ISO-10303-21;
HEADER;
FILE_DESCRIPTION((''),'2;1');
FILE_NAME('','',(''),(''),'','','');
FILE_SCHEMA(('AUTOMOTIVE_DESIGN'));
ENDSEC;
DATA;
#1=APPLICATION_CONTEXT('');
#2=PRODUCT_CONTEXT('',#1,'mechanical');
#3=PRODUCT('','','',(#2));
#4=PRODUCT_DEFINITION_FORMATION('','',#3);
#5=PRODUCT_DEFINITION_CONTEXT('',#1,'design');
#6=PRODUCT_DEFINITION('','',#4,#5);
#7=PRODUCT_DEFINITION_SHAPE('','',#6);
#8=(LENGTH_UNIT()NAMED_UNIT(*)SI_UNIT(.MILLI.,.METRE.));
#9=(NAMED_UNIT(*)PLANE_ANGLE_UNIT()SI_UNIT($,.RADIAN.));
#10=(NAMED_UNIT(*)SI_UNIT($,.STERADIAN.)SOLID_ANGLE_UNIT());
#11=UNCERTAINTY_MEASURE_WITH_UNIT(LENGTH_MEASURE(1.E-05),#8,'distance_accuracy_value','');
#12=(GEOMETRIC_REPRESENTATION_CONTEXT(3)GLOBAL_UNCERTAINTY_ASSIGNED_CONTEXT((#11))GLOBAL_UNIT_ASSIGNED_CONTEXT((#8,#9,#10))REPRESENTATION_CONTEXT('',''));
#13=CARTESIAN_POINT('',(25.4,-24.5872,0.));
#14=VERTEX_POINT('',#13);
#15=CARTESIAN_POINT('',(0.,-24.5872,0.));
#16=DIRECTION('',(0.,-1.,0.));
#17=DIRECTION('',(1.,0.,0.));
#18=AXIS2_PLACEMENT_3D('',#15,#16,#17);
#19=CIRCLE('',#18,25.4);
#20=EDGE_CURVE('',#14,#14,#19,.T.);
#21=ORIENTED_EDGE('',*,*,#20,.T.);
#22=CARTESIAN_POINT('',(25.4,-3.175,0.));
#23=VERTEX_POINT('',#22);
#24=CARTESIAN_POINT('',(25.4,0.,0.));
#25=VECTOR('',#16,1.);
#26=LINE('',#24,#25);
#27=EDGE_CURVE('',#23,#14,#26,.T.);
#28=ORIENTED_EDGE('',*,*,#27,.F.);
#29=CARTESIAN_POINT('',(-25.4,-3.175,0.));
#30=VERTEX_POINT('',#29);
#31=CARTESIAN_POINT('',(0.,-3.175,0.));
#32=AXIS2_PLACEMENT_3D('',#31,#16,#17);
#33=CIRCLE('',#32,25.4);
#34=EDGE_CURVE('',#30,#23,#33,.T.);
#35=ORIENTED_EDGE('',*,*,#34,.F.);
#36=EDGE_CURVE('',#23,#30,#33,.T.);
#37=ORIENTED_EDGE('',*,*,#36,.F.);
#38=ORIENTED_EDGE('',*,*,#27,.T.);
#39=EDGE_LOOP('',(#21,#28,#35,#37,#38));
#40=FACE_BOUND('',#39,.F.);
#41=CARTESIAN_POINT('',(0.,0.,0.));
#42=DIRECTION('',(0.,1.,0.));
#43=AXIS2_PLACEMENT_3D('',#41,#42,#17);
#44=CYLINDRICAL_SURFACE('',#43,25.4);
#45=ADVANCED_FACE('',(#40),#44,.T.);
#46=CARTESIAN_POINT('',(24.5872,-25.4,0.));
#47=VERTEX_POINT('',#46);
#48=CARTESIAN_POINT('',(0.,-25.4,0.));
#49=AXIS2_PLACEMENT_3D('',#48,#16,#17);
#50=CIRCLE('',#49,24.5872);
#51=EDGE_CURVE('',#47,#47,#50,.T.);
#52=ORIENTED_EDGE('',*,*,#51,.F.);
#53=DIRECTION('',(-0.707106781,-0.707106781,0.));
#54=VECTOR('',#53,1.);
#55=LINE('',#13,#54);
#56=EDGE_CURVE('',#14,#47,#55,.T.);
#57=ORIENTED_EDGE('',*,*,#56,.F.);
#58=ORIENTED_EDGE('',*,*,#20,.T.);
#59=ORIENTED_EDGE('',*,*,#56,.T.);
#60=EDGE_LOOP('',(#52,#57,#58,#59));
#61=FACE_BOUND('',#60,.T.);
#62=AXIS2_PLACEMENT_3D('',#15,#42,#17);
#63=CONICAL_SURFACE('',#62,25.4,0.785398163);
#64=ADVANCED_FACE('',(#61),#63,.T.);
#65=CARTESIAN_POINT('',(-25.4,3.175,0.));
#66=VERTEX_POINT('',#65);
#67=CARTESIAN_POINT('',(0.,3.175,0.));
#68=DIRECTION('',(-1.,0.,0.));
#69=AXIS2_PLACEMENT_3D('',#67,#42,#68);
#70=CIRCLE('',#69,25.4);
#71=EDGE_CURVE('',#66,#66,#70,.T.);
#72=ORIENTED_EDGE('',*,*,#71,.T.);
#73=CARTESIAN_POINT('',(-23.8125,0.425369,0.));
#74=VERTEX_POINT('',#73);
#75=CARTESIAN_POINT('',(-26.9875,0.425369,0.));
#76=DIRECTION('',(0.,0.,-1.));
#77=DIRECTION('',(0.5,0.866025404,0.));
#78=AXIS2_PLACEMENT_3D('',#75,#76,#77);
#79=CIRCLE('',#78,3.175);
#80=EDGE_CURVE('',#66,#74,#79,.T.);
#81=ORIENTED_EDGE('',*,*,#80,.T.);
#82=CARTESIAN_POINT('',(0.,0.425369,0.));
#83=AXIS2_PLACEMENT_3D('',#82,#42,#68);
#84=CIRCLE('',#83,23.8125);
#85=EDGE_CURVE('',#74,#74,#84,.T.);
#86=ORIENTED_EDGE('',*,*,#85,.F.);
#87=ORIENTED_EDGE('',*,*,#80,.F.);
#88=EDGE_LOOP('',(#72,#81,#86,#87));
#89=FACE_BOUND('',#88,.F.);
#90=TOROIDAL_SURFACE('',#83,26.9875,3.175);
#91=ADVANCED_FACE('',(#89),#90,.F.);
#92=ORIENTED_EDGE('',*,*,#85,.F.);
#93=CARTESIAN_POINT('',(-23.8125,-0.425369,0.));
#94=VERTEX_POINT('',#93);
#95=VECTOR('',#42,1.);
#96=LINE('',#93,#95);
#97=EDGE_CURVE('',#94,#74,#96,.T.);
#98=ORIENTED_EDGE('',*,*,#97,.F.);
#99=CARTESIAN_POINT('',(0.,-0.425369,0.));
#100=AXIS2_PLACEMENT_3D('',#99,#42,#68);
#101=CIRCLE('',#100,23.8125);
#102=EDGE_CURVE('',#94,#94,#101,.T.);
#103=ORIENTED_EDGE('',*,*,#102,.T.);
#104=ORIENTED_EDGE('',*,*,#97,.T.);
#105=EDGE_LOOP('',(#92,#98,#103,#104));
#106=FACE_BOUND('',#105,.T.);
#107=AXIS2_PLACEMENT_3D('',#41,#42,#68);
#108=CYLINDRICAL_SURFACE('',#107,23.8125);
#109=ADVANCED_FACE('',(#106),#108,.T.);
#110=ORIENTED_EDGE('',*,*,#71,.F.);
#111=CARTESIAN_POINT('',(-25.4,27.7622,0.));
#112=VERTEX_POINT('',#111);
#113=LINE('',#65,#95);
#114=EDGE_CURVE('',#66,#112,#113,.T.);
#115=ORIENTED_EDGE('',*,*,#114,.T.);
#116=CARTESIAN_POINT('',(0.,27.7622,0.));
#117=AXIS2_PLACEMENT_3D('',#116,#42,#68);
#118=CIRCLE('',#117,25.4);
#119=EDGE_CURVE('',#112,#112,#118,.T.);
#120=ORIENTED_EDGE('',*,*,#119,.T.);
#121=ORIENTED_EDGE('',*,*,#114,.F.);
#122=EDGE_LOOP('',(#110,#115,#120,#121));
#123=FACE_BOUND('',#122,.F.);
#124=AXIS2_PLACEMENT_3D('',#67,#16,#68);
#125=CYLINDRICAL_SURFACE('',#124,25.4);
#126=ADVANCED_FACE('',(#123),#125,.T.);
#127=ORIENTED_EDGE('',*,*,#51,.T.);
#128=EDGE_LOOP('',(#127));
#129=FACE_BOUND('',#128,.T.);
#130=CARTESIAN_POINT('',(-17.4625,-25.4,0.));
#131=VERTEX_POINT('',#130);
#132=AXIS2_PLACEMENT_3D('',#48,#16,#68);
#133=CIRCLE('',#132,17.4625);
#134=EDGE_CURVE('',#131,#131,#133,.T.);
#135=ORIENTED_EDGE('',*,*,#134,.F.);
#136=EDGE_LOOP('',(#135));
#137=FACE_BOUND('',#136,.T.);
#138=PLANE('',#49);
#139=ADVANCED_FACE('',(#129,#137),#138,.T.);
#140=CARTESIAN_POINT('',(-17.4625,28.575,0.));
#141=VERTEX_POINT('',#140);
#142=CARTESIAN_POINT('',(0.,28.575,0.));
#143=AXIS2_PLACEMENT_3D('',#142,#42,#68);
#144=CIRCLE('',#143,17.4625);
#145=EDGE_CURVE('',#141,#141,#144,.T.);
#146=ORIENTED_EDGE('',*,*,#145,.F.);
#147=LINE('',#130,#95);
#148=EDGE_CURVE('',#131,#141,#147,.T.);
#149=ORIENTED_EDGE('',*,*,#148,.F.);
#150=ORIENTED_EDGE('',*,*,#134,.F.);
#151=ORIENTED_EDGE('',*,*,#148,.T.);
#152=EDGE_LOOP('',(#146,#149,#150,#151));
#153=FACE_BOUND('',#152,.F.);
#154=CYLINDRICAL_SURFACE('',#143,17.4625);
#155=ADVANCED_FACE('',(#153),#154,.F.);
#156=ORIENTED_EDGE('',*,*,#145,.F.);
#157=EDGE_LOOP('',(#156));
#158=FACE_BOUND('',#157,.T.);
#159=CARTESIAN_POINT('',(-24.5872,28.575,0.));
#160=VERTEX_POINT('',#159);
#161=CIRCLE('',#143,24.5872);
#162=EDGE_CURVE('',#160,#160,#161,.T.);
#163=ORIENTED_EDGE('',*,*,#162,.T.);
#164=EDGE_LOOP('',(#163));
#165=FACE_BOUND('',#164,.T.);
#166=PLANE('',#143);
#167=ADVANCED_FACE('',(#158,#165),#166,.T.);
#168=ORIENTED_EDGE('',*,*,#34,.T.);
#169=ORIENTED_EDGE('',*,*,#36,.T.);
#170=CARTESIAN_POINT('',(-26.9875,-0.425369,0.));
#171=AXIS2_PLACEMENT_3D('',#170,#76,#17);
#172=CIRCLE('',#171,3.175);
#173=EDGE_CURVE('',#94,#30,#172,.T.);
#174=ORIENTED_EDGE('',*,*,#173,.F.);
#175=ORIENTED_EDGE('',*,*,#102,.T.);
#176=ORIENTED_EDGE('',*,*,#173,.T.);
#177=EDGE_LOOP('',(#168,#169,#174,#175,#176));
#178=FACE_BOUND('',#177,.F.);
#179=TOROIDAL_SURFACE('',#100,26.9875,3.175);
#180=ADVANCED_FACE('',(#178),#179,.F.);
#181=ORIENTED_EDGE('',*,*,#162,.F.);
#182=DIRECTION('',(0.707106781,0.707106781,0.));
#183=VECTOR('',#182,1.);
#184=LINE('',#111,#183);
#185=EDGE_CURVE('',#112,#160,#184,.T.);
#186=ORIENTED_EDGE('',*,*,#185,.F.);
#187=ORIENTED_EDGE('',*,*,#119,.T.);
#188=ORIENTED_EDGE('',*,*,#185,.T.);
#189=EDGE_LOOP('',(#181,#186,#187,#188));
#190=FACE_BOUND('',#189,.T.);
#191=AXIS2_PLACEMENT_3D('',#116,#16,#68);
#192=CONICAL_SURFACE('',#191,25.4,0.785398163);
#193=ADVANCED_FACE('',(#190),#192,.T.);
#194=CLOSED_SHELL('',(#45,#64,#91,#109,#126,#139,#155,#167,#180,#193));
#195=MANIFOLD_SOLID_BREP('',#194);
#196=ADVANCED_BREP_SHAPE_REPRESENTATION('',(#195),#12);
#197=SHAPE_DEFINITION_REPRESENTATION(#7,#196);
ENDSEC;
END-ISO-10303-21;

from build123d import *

# Parameters (mm, degrees)
F0_R      = 25.4
F0_R_2    = 17.4625
F1_DEPTH  = 25.4
F2_R      = 25.4
F2_R_2    = 23.8125
F3_DEPTH  = 3.175
F4_DEPTH  = 3.175
F5_R      = 25.4
F6_DEPTH  = 25.4
F8_SIZE   = 0.8128
F9_R      = 17.4625
F10_DEPTH = 53.976


# Not quite as in the source:
# - a fillet or chamfer that OpenCascade refuses, or shapes differently, is made with other operations: its cross-section is extruded or revolved along the edge and cut away or added


with BuildPart() as f1:
    # F0 (on Front) → F1 (new body)
    with BuildSketch(Plane.XZ):
        Circle(F0_R)
        Circle(F0_R_2, mode=Mode.SUBTRACT)
    extrude(amount=F1_DEPTH)

    # F2 (on face) → F3 (cut)
    with BuildSketch(Plane(origin=(0, 0, 0), x_dir=(-1, 0, 0), z_dir=(0, 1, 0))):
        Circle(F2_R)
        Circle(F2_R_2, mode=Mode.SUBTRACT)
    extrude(amount=-F3_DEPTH, mode=Mode.SUBTRACT)

    # F4 (add): a face of the model
    f4_faces = [f1.faces().sort_by_distance(p)[0] for p in [
        (23.1389807909, 0, 0),
    ]]
    extrude(f4_faces, amount=F4_DEPTH)

    # F5 (on face) → F6 (join)
    with BuildSketch(Plane(origin=(0, 3.175, 0), x_dir=(-1, 0, 0), z_dir=(0, 1, 0))):
        Circle(F5_R)
    extrude(amount=F6_DEPTH)

    # F7: fillet of radius 3.175 on 2 edges, made by hand

    # F7_s1 → F7_t2 (revolve)
    with BuildSketch(Plane.XY):
        with BuildLine():
            ThreePointArc((-23.8125, -0.425369343), (-24.237869343, -2.012869343), (-25.4, -3.175))
            Line((-25.4, -3.175), (-23.8125, -3.175))
            Line((-23.8125, -3.175), (-23.8125, -0.425369343))
        make_face()
    revolve(axis=Axis((0, -3.175, 0), (0, 1, 0)))

    # F7_s3 → F7_t4 (revolve)
    with BuildSketch(Plane.XY):
        with BuildLine():
            ThreePointArc((-25.4, 3.175), (-24.237869343, 2.012869343), (-23.8125, 0.425369343))
            Line((-23.8125, 0.425369343), (-23.8125, 3.175))
            Line((-23.8125, 3.175), (-25.4, 3.175))
        make_face()
    revolve(axis=Axis((0, 3.175, 0), (0, 1, 0)))

    # F8
    f8_edges = [f1.edges().sort_by_distance(p)[0] for p in [
        (-25.4, -25.4, 0),
        (25.4, 28.575, 0),
    ]]
    chamfer(f8_edges, length=F8_SIZE)

    # F9 (on face) → F10 (cut, through all)
    with BuildSketch(Plane(origin=(0, 28.575, 0), x_dir=(-1, 0, 0), z_dir=(0, 1, 0))):
        Circle(F9_R)
    extrude(amount=-F10_DEPTH, mode=Mode.SUBTRACT)


solid = f1.part
